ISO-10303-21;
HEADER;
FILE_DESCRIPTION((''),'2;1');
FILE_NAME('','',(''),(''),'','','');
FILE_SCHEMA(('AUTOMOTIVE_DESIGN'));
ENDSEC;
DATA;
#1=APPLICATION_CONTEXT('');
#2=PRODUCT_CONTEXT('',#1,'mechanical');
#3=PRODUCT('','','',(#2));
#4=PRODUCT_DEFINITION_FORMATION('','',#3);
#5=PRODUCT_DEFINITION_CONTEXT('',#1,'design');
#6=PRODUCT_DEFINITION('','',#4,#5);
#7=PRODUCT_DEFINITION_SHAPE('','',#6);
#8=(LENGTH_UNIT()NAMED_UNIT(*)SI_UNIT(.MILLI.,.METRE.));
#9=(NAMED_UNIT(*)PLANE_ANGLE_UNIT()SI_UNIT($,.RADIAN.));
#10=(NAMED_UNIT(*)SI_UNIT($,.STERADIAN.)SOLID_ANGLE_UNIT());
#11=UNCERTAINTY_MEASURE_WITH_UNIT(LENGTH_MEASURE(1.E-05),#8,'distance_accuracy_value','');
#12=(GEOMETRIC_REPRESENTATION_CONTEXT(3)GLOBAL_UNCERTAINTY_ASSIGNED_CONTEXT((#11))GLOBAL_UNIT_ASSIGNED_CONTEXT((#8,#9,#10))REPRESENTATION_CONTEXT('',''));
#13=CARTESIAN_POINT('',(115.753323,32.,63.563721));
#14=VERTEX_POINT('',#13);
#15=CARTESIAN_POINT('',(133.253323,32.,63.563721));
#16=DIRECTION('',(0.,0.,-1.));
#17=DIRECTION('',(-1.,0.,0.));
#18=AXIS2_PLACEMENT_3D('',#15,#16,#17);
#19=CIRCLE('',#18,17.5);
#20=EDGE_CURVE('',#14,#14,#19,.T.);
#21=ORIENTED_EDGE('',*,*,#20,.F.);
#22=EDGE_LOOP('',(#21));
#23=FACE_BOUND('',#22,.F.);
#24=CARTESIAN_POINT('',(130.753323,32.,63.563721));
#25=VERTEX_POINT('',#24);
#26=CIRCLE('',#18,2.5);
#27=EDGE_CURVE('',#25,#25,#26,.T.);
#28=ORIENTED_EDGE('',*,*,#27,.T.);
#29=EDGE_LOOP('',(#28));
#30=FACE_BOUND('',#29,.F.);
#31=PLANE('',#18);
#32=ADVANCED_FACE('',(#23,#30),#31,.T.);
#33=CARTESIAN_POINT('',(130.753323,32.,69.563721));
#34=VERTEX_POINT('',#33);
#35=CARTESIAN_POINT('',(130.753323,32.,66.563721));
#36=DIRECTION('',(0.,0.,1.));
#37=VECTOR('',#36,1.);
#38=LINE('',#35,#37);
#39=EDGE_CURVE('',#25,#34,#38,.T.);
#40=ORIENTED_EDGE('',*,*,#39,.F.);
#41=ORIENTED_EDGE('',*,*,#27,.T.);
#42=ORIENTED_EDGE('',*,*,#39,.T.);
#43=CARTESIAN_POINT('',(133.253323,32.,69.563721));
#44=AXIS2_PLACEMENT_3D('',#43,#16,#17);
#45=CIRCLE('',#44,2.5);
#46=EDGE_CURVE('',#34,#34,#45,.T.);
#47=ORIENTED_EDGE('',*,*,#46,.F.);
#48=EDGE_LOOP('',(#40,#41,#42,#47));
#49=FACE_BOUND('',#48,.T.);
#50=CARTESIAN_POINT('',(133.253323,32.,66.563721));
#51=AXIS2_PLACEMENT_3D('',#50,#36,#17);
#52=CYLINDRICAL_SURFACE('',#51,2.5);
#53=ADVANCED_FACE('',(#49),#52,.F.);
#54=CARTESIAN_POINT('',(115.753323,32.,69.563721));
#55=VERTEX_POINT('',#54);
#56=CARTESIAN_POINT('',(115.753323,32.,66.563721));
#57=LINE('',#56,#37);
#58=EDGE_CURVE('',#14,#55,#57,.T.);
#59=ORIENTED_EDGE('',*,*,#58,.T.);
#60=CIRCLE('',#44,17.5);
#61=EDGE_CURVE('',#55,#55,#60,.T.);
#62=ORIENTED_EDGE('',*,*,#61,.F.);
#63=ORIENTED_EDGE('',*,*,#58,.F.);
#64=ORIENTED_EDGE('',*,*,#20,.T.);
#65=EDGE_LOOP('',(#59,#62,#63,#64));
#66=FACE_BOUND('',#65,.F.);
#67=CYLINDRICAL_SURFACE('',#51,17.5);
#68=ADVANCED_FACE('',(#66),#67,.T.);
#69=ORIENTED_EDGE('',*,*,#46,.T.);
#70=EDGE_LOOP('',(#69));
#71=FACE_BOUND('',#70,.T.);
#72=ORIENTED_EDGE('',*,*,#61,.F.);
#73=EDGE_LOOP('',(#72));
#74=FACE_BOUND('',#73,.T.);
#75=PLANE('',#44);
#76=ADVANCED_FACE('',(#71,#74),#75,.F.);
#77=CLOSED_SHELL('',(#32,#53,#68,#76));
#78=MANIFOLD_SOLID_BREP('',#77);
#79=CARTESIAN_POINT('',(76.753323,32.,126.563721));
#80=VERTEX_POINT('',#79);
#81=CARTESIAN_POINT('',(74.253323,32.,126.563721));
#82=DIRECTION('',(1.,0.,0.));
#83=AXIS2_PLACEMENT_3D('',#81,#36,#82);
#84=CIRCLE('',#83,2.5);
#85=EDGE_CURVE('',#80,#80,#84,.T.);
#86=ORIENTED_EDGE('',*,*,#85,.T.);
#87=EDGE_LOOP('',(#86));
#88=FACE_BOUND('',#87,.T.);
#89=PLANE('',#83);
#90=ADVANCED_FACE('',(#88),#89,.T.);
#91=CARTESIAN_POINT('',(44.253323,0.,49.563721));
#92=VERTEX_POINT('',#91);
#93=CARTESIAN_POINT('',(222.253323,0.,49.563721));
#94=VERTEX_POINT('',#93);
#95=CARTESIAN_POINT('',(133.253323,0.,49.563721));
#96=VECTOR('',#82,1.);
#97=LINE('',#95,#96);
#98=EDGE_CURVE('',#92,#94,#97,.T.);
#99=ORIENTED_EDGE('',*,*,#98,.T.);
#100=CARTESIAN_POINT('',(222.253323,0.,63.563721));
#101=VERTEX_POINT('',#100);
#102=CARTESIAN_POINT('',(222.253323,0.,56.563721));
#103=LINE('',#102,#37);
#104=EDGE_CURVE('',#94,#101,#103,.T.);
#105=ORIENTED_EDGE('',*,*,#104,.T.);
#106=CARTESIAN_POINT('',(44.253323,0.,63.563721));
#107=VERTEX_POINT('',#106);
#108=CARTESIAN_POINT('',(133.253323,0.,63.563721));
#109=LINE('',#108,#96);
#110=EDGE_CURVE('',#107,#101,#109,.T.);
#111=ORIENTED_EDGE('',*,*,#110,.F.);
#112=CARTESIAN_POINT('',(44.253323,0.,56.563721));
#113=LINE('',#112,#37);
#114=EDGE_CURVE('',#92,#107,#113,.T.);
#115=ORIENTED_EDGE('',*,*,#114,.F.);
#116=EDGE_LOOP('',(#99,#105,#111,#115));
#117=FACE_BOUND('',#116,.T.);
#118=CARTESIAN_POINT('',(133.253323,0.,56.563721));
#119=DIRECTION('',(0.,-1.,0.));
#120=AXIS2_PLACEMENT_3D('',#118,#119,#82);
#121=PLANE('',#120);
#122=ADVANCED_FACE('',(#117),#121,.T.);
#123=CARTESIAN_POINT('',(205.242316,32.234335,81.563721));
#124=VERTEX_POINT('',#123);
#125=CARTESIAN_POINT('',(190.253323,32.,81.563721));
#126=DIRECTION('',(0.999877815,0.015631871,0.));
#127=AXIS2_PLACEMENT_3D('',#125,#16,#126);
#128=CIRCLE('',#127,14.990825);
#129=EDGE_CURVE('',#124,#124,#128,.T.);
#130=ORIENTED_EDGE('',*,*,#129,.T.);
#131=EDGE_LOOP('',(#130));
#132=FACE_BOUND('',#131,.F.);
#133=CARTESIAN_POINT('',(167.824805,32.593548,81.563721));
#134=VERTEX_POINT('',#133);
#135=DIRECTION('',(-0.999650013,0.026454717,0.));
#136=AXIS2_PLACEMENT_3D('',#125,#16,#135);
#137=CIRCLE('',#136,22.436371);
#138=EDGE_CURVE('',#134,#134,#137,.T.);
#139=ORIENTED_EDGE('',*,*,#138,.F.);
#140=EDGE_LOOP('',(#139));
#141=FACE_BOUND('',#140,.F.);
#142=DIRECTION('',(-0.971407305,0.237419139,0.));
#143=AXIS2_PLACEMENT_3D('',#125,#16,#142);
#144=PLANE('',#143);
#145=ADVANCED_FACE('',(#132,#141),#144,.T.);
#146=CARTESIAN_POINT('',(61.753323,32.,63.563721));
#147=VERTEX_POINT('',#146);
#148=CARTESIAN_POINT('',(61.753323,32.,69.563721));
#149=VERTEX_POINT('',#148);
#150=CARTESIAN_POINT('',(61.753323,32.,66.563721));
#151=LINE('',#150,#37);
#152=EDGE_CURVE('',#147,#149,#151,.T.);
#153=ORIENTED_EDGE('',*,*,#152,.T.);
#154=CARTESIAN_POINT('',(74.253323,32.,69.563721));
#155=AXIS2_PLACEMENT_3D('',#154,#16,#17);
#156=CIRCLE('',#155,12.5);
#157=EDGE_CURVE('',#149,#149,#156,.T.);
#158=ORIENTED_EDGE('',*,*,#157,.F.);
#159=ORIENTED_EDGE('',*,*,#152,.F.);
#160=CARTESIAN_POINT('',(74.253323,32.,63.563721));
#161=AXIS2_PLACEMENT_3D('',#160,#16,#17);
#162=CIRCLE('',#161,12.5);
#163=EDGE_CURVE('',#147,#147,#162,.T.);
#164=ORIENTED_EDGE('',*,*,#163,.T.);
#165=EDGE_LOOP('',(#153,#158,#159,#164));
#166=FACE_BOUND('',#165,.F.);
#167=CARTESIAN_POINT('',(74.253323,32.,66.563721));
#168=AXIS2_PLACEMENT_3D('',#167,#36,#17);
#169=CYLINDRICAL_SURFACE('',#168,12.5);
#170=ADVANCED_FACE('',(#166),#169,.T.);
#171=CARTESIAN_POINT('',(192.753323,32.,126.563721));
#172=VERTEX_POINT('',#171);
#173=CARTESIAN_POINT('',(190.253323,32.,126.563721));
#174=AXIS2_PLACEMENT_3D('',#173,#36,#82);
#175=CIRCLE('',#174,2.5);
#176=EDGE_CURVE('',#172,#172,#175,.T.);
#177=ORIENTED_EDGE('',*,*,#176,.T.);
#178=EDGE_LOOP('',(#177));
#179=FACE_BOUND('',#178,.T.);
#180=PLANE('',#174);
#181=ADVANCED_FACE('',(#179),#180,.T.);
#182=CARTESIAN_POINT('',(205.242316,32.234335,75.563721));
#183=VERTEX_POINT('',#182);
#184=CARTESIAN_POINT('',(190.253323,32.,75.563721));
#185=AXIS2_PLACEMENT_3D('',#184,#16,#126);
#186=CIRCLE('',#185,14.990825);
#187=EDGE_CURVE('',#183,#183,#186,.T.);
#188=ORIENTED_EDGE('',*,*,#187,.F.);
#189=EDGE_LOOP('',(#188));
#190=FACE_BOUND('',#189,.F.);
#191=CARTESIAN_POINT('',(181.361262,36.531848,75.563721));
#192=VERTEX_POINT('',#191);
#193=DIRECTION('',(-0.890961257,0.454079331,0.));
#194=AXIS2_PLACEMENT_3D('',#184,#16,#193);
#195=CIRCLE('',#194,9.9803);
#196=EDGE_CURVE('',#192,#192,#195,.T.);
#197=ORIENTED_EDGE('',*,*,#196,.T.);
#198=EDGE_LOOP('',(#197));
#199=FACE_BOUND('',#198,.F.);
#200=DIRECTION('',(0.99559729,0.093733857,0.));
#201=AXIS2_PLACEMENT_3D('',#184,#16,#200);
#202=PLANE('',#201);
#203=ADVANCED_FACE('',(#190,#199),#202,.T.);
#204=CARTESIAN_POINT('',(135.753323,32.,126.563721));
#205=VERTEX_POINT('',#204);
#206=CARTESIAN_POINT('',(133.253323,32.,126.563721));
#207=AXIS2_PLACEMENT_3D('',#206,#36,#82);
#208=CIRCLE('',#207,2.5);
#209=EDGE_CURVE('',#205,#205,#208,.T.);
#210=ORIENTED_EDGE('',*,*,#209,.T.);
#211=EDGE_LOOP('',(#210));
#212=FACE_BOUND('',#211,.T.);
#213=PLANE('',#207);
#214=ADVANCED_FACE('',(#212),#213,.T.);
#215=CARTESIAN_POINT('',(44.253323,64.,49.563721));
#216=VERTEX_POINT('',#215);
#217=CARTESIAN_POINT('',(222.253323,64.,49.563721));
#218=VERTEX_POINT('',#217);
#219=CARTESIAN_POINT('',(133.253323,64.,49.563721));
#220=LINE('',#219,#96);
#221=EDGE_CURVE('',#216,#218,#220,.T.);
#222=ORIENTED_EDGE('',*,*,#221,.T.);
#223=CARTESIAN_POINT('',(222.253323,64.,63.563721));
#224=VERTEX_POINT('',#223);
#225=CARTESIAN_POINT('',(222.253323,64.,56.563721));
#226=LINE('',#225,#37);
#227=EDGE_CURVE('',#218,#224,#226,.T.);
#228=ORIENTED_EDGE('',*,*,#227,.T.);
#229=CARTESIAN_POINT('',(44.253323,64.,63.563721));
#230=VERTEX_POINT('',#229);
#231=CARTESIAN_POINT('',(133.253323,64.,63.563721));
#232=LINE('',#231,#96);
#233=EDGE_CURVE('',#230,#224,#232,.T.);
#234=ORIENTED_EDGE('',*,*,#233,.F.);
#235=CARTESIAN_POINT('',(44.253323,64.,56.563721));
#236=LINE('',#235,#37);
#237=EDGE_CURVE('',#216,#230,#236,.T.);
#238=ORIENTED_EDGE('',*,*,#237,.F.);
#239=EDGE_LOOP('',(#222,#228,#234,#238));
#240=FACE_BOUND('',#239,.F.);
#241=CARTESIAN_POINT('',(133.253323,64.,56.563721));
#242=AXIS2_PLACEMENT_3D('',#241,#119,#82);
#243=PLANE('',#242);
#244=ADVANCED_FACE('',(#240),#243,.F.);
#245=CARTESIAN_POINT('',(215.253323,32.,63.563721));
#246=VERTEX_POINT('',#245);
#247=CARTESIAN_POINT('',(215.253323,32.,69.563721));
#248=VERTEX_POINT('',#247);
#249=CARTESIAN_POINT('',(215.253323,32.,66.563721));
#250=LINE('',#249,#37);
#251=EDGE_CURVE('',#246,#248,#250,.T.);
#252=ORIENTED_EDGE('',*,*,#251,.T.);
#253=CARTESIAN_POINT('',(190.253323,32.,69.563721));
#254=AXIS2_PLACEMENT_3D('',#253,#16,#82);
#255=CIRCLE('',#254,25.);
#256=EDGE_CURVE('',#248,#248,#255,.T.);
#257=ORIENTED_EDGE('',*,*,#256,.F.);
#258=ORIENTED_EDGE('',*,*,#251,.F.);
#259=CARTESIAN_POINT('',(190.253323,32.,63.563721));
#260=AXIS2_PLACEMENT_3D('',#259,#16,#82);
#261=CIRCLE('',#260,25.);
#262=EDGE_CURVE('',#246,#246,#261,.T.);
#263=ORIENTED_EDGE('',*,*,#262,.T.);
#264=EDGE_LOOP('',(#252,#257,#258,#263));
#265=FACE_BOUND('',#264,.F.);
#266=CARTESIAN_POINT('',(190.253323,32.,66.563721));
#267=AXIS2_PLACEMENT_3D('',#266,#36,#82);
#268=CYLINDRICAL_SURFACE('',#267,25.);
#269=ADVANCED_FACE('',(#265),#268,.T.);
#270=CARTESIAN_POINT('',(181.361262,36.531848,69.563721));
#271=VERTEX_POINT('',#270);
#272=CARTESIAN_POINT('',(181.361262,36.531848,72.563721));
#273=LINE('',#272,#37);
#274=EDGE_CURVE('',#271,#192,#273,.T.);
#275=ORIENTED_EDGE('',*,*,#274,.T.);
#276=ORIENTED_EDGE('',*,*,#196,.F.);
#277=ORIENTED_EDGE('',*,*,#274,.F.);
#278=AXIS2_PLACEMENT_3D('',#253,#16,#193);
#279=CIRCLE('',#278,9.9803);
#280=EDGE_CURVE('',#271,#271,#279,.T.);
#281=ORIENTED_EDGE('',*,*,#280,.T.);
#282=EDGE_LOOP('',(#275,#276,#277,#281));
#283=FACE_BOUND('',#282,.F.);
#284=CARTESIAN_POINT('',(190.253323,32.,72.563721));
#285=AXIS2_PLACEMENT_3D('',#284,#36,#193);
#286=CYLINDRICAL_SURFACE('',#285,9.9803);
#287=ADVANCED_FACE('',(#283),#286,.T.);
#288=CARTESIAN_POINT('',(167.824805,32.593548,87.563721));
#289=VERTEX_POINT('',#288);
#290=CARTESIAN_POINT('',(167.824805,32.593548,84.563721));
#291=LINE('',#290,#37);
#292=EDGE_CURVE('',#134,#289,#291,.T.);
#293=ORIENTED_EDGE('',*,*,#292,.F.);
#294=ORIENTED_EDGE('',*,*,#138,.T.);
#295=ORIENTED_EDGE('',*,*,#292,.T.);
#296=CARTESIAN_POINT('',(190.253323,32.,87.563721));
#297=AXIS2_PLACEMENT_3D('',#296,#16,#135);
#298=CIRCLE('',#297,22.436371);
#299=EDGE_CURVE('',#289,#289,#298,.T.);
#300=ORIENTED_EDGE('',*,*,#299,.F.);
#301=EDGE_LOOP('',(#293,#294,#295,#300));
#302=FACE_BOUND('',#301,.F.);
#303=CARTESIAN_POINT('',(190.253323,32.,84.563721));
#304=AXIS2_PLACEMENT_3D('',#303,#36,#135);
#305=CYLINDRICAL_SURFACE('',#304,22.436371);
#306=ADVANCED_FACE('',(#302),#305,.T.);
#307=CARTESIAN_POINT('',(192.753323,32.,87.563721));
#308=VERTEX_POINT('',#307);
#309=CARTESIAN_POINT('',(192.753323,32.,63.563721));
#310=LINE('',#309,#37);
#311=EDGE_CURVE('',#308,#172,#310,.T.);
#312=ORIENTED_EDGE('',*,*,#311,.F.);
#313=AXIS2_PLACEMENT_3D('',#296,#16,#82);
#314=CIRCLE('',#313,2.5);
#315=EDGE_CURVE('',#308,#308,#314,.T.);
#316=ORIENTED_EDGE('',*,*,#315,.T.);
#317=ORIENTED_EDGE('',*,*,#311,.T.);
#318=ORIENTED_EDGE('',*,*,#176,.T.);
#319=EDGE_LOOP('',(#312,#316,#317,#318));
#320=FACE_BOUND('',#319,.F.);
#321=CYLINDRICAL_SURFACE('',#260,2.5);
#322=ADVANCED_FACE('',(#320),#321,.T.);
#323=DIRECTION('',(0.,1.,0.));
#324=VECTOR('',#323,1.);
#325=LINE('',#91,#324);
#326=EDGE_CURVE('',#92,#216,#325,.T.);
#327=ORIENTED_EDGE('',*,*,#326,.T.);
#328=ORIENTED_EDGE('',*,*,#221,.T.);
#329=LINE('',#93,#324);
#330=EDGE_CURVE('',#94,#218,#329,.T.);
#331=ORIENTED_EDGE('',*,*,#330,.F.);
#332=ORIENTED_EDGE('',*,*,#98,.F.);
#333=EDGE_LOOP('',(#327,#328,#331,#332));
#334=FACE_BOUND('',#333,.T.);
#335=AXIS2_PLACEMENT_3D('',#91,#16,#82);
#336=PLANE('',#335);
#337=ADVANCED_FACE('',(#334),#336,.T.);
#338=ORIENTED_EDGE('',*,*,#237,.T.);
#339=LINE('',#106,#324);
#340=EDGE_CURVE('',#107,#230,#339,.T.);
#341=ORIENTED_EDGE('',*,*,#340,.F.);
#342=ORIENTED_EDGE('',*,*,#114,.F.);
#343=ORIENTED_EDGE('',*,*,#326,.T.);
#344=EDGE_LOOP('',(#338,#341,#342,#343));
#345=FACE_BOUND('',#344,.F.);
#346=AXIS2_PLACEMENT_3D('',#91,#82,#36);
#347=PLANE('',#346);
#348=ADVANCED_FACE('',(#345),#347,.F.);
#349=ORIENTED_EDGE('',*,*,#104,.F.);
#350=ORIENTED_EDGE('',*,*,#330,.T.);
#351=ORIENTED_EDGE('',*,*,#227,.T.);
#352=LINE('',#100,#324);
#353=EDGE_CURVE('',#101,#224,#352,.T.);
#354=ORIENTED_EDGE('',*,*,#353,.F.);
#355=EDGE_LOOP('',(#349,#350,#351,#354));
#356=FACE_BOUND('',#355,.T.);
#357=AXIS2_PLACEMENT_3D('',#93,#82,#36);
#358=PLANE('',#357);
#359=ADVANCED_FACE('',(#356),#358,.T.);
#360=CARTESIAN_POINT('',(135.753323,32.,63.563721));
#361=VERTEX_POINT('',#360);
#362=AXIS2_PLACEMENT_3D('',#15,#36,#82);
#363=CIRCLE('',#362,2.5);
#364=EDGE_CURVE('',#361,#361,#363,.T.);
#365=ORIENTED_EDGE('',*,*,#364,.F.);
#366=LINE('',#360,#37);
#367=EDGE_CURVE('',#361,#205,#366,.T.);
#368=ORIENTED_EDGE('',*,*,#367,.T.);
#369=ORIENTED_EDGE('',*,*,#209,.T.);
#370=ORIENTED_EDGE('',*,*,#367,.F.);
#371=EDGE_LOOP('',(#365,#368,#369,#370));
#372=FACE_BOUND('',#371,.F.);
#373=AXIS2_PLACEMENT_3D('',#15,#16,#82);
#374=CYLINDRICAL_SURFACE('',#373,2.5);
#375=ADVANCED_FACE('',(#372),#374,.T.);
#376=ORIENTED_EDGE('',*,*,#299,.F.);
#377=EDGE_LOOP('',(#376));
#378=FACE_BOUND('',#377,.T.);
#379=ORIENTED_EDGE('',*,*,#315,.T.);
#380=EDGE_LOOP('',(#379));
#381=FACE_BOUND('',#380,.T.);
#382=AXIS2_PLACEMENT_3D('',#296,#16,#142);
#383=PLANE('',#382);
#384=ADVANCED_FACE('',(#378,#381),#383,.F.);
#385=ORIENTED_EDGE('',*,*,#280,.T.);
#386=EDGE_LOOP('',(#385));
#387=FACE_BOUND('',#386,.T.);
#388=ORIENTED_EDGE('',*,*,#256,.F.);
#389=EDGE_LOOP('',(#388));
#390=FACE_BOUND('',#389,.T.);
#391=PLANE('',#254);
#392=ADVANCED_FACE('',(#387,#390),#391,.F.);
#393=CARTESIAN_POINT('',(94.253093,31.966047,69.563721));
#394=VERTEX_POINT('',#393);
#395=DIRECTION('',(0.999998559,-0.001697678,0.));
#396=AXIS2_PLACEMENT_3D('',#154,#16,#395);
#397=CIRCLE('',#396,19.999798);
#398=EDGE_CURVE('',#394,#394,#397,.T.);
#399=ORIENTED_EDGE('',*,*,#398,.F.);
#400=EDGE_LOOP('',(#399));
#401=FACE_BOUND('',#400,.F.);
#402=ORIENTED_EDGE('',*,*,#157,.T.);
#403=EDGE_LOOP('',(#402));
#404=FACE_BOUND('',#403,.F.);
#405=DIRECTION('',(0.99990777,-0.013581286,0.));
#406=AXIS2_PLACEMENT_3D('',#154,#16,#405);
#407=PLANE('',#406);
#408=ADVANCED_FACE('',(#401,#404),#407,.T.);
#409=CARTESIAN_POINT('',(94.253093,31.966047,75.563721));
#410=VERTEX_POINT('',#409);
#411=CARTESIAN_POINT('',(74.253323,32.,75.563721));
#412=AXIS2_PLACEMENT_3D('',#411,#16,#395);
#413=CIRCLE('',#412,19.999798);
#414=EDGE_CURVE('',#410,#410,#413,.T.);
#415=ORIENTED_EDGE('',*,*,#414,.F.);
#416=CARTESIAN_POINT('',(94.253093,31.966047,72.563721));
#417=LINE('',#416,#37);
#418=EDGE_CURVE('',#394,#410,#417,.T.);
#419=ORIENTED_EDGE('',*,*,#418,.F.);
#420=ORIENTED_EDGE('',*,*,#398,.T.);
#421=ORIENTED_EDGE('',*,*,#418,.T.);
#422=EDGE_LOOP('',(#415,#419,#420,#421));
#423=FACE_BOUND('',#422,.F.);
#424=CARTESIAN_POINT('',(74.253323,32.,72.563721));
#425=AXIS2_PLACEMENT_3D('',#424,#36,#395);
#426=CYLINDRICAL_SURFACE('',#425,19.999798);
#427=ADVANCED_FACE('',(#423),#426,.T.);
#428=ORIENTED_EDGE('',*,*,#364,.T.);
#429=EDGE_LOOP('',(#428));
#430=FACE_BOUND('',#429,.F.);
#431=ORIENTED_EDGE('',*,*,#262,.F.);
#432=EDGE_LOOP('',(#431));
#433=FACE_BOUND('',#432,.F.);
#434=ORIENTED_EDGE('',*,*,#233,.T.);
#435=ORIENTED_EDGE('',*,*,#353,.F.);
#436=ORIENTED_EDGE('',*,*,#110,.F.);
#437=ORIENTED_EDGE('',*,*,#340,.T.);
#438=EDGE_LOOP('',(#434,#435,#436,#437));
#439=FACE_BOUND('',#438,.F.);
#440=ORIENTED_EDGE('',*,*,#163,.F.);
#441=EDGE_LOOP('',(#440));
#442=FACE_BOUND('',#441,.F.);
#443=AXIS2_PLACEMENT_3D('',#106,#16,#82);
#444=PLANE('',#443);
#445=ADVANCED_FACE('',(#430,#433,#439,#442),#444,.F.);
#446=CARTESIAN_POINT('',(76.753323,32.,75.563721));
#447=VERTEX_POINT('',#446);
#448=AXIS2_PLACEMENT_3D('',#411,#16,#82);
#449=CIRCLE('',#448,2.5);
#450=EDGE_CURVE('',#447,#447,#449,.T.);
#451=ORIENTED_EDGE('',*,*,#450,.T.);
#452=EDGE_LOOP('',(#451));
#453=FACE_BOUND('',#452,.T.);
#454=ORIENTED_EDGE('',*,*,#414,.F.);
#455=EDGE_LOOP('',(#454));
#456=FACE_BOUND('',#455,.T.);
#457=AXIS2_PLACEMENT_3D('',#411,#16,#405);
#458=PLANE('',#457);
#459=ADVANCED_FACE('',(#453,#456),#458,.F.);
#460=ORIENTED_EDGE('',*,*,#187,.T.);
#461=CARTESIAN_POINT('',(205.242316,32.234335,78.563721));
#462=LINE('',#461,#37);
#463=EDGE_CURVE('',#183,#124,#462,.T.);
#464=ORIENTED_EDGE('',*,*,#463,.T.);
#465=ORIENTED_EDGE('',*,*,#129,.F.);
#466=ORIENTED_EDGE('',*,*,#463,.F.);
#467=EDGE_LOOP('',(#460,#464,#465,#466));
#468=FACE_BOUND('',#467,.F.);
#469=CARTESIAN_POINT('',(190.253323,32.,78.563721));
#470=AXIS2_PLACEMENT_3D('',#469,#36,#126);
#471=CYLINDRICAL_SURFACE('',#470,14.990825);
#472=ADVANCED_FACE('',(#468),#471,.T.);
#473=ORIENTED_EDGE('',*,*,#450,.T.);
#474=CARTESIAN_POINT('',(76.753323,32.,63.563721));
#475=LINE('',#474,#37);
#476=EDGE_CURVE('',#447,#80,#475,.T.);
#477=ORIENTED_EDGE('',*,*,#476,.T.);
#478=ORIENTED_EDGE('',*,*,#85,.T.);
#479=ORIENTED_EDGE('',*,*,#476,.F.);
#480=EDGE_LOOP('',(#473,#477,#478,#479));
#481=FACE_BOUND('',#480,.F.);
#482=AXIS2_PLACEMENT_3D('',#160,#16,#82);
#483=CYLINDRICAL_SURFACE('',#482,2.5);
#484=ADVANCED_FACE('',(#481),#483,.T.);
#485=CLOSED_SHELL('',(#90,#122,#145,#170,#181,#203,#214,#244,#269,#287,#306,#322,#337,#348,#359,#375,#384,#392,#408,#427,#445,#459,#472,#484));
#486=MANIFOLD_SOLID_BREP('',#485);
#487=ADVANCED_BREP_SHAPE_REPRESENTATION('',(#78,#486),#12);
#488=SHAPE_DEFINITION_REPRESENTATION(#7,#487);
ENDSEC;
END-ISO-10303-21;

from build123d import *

# Parameters (mm, degrees)
F0_W      = 178
F0_H      = 14
F1_DEPTH  = 64
F3_R      = 2.5
F4_DEPTH  = 63
F6_E10_W  = 22.5
F6_E10_H  = 6
F9_E11_W  = 10
F9_E11_H  = 6
F9_E12_W  = 15
F9_E12_H  = 6
F13_E13_W = 7.5
F13_E13_H = 6
F16_E14_W = 17.5
F16_E14_H = 6
F19_E15_W = 12.5
F19_E15_H = 6
F22_E16_W = 20
F22_E16_H = 6


with BuildPart() as f1:
    # F0 (on Front) → F1 (new body)
    with BuildSketch(Plane.XZ):
        with Locations((133.2533232272, 56.5637208223)):
            Rectangle(F0_W, F0_H)
    extrude(amount=-F1_DEPTH)

    # F3 (on face) → F4 (join)
    with BuildSketch(Plane.XY.offset(63.5637208223)):
        with Locations((74.2533232272, 32)):
            Circle(F3_R)
        with Locations((133.2533232272, 32)):
            Circle(F3_R)
        with Locations((190.2533232272, 32)):
            Circle(F3_R)
    extrude(amount=F4_DEPTH)

    # F6_E10 (on explicit) → F7 (revolve)
    with BuildSketch(Plane(origin=(192.7533232272, 32, 63.5637208223), x_dir=(1, 0, 0), z_dir=(0, -1, 0))):
        with Locations((11.25, 3)):
            Rectangle(F6_E10_W, F6_E10_H)
    revolve(axis=Axis((190.2533232272, 32, 63.5637208223), (0, 0, -1)))

    # F9_E11 (on explicit) → F10 (revolve)
    with BuildSketch(Plane(origin=(71.7533232272, 32, 63.5637208223), x_dir=(-1, 0, 0), z_dir=(0, 1, 0))):
        with Locations((5, 3)):
            Rectangle(F9_E11_W, F9_E11_H)
    revolve(axis=Axis((74.2533232272, 32, 63.5637208223), (0, 0, -1)))

    # F13_E13 (on explicit) → F14 (revolve)
    with BuildSketch(Plane(origin=(187.9158168097, 32.886602362, 69.5637208223), x_dir=(-0.8739405908, 0.4860327599, 0), z_dir=(0.4860327599, 0.8739405908, 0))):
        with Locations((3.75, 3)):
            Rectangle(F13_E13_W, F13_E13_H)
    revolve(axis=Axis((190.2533232272, 32, 63.5637208223), (0, 0, -1)))

    # F16_E14 (on explicit) → F17 (revolve)
    with BuildSketch(Plane(origin=(76.7530926524, 31.9660467851, 69.5637208223), x_dir=(1, 0, 0), z_dir=(0, -1, 0))):
        with Locations((8.75, 3)):
            Rectangle(F16_E14_W, F16_E14_H)
    revolve(axis=Axis((74.2533232272, 32, 63.5637208223), (0, 0, -1)))

    # F19_E15 (on explicit) → F20 (revolve)
    with BuildSketch(Plane(origin=(192.7423164525, 32.2343346416, 75.5637208223), x_dir=(1, 0, 0), z_dir=(0, -1, 0))):
        with Locations((6.25, 3)):
            Rectangle(F19_E15_W, F19_E15_H)
    revolve(axis=Axis((190.2533232272, 32, 63.5637208223), (0, 0, -1)))

    # F22_E16 (on explicit) → F23 (revolve)
    with BuildSketch(Plane(origin=(187.8248049644, 32.5935478477, 81.5637208223), x_dir=(-1, 0, 0), z_dir=(0, 1, 0))):
        with Locations((10, 3)):
            Rectangle(F22_E16_W, F22_E16_H)
    revolve(axis=Axis((190.2533232272, 32, 63.5637208223), (0, 0, -1)))


with BuildPart() as f11:
    # F9_E12 (on explicit) → F11 (revolve)
    with BuildSketch(Plane(origin=(130.7533232272, 32, 63.5637208223), x_dir=(-1, 0, 0), z_dir=(0, 1, 0))):
        with Locations((7.5, 3)):
            Rectangle(F9_E12_W, F9_E12_H)
    revolve(axis=Axis((133.2533232272, 32, 63.5637208223), (0, 0, -1)))


solid = Compound([f1.part, f11.part])
